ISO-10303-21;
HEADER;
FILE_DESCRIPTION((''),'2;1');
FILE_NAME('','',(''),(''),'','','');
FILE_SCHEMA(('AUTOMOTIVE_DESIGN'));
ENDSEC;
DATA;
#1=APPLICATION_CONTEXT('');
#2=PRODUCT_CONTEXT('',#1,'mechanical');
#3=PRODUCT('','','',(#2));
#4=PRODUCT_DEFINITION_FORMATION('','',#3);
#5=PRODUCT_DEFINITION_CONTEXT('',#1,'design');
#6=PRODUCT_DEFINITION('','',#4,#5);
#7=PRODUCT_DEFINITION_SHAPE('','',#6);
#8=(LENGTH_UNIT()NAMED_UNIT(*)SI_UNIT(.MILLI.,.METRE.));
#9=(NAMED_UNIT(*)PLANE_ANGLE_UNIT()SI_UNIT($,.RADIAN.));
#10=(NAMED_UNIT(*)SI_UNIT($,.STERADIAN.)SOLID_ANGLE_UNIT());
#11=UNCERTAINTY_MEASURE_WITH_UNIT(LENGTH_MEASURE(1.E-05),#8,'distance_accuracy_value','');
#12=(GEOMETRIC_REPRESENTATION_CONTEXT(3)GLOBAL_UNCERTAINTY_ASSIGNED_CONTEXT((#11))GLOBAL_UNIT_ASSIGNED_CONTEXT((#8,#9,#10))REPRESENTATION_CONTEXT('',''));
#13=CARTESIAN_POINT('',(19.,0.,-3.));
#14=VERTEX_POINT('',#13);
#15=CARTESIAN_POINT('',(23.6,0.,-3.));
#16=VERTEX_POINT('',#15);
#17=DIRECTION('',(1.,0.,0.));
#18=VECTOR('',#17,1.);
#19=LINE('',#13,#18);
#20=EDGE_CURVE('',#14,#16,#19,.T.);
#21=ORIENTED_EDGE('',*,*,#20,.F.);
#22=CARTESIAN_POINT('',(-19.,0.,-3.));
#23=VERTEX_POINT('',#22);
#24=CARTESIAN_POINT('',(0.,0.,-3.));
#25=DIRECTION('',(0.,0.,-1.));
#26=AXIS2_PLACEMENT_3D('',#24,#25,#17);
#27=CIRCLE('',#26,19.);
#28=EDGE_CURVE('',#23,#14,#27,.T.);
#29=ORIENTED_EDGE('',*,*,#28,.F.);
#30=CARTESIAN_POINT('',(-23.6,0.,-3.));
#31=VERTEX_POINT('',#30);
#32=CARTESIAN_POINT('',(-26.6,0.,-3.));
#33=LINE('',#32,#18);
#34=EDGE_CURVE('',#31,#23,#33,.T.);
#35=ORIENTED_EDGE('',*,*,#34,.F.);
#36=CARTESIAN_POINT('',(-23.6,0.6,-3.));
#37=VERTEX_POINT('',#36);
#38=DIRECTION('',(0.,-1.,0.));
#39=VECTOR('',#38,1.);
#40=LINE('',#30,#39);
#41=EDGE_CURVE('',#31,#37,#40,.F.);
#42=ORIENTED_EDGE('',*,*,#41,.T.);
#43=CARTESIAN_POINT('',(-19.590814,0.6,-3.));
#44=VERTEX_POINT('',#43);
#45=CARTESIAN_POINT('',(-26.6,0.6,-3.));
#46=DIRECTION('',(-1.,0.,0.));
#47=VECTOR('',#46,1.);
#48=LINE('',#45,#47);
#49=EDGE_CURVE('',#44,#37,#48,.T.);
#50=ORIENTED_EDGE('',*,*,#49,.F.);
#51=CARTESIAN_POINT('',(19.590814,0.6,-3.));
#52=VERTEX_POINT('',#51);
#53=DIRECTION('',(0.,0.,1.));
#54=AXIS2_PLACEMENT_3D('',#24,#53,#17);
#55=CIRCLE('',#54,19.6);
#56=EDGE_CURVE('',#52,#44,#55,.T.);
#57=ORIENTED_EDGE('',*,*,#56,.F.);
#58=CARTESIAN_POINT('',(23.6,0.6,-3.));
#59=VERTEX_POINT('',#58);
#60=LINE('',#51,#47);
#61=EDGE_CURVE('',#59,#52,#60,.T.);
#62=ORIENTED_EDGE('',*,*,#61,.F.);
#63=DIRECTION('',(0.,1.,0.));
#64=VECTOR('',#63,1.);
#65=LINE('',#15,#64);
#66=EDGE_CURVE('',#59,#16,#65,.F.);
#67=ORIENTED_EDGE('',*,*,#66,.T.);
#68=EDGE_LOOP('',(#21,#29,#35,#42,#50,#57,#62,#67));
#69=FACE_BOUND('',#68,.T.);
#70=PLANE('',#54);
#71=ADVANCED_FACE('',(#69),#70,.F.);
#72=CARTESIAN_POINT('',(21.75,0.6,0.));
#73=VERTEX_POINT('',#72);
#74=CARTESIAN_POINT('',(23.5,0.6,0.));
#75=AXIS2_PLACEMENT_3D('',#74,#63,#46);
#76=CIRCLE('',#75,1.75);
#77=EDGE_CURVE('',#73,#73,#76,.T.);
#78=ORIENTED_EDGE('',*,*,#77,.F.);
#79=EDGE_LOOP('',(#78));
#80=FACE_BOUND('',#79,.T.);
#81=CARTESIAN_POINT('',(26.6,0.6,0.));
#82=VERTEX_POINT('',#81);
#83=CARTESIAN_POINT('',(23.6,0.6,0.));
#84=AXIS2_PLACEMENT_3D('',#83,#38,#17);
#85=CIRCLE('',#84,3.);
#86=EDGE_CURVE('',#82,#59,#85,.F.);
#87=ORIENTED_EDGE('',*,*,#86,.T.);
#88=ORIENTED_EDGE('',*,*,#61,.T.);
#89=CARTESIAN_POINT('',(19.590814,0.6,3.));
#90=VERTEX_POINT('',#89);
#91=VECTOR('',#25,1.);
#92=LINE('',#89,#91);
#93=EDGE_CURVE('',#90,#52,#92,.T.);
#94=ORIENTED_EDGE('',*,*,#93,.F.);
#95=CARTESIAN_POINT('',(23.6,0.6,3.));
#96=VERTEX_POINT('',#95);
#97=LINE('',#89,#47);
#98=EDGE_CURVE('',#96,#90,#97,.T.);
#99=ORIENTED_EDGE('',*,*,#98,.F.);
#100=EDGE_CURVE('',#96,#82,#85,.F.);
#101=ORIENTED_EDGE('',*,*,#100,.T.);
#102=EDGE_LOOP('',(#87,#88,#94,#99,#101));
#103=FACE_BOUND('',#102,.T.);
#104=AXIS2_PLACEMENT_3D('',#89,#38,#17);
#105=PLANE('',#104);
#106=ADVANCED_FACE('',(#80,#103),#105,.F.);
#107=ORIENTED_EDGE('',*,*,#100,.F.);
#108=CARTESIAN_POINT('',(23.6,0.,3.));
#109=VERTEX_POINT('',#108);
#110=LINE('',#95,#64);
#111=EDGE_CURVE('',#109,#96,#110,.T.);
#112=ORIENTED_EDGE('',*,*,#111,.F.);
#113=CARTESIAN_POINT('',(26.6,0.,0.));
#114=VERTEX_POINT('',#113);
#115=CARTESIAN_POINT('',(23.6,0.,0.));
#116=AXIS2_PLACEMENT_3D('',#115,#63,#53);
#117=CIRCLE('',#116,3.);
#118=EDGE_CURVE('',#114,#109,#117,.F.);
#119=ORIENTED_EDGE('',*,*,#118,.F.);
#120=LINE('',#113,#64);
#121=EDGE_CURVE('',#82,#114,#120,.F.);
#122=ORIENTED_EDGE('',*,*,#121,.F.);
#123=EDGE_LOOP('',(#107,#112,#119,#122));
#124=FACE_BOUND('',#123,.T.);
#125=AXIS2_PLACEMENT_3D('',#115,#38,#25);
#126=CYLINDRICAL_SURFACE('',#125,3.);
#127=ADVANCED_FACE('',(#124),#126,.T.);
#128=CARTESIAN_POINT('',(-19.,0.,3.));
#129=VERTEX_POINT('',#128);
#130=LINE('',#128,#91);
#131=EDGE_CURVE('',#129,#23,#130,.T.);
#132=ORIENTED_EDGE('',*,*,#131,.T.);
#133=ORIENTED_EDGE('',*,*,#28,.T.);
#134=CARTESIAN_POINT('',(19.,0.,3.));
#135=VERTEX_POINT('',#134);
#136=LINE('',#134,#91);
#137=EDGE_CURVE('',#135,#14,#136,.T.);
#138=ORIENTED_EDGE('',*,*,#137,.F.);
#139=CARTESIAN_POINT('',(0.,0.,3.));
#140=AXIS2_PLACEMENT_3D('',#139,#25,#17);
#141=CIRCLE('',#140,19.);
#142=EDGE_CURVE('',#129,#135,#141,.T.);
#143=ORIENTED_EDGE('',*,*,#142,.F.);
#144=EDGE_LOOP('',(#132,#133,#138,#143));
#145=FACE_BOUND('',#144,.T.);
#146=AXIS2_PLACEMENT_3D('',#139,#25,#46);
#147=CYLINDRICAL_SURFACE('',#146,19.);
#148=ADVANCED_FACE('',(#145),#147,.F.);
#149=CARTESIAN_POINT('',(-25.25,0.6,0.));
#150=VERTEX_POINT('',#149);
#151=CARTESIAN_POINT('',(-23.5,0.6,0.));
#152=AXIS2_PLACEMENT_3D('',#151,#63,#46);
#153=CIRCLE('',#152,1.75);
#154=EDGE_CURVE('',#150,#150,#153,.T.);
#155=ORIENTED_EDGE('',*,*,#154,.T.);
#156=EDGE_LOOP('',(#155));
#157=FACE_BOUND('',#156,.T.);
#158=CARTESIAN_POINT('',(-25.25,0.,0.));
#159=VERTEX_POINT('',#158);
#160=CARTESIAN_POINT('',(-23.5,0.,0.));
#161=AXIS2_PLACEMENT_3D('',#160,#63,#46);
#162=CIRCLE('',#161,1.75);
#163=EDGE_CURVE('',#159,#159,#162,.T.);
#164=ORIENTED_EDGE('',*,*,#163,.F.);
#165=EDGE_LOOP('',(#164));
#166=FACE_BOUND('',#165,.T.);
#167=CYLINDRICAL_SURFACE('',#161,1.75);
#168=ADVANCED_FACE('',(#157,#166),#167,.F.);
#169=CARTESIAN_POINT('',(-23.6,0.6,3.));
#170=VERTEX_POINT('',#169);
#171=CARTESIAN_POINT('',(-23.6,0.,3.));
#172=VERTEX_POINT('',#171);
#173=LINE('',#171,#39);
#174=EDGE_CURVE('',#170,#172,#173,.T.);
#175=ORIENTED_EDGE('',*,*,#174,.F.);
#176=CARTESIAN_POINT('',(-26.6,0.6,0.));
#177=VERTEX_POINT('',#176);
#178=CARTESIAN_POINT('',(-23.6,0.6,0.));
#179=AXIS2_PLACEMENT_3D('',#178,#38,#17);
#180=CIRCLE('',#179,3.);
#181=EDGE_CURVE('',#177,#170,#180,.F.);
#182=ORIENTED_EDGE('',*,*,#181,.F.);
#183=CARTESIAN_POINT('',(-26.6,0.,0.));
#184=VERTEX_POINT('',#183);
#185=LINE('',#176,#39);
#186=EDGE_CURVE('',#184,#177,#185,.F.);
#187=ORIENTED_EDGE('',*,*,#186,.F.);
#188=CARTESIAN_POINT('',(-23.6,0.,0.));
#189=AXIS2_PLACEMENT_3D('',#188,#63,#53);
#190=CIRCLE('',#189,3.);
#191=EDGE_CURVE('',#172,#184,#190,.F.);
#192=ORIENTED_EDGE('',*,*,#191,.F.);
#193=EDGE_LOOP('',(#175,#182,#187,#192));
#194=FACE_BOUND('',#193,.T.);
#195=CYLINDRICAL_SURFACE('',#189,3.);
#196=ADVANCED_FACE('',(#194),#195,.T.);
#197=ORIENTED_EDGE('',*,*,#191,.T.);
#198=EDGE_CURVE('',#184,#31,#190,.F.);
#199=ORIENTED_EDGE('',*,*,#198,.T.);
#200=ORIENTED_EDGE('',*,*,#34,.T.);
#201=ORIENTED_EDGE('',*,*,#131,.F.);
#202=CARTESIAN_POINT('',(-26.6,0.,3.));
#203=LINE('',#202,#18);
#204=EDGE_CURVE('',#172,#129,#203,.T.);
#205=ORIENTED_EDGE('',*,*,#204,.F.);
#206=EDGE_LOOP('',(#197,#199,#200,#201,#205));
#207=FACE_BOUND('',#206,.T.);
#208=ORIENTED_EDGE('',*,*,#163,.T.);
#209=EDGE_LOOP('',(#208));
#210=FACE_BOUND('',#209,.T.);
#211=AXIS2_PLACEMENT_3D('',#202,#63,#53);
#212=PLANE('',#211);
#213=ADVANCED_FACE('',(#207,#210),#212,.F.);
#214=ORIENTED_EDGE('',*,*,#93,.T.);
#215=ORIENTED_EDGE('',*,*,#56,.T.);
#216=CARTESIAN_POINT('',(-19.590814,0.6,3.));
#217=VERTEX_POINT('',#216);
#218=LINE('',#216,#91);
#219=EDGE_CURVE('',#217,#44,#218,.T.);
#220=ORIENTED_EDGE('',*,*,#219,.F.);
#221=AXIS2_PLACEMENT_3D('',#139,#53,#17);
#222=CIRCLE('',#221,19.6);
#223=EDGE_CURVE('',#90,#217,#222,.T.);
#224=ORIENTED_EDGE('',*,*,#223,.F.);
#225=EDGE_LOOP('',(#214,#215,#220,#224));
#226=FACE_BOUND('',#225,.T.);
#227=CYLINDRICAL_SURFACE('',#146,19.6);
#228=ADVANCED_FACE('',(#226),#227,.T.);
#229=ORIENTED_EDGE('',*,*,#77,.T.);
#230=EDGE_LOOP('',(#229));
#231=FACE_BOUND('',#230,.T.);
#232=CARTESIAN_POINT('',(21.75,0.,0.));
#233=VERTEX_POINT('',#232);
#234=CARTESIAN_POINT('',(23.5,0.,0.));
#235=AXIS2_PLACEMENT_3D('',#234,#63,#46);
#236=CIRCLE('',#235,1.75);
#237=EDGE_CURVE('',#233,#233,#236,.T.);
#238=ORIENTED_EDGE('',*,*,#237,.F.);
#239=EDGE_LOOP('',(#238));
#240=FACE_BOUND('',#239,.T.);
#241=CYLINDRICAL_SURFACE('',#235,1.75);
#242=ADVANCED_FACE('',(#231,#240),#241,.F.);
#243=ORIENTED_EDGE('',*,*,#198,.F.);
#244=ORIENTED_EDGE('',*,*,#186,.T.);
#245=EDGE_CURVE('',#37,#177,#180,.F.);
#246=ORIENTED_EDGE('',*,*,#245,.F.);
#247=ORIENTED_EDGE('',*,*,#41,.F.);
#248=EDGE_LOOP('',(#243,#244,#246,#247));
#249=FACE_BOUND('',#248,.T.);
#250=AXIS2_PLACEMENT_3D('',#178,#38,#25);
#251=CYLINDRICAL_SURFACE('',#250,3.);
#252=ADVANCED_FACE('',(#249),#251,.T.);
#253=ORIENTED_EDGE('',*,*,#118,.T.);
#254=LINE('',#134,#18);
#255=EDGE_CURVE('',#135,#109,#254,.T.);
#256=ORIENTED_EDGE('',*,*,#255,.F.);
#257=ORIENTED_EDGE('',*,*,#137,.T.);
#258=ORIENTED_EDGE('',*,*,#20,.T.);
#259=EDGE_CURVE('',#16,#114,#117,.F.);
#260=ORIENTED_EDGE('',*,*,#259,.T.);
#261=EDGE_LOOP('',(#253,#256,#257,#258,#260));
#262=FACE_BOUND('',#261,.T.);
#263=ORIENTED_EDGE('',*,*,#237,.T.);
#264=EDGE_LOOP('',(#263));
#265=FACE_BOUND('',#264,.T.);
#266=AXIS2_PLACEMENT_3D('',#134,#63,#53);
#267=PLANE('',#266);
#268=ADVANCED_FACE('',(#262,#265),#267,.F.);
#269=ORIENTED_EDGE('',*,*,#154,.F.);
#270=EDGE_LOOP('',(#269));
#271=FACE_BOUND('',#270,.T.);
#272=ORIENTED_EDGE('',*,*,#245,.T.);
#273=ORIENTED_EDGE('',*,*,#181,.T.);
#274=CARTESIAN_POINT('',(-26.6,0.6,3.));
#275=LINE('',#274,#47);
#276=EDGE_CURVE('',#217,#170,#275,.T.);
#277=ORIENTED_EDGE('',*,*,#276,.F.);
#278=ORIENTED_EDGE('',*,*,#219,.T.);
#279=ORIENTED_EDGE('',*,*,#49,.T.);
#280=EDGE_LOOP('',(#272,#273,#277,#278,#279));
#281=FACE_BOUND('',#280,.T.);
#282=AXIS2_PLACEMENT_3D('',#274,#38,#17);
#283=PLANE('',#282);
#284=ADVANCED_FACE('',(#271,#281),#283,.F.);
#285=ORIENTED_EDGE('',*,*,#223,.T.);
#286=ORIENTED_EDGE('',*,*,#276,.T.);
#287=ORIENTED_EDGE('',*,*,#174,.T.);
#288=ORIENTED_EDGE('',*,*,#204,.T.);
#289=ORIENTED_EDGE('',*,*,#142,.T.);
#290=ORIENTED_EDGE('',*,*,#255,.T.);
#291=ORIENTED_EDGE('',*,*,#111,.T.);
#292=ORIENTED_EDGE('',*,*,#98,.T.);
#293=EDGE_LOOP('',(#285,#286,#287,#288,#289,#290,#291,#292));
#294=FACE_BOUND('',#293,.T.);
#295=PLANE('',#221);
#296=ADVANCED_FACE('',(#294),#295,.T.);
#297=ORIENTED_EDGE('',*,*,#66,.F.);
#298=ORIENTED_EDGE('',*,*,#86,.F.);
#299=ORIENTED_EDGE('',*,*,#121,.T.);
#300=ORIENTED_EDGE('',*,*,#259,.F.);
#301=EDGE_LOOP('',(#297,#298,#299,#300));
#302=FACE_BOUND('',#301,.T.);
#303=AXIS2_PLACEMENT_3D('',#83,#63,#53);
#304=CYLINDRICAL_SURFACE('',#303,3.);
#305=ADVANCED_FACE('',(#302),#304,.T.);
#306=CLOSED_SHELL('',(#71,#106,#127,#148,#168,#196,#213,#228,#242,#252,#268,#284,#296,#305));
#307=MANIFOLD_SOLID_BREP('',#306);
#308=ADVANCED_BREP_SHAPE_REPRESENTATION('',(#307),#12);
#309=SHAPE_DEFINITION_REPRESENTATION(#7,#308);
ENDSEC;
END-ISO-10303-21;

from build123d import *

# Parameters (mm, degrees)
BOSS_EXTRU_1_DEPTH      = 3
CONG_1_R                = 3
ESQUISSE2_R             = 1.75
ENL_V_MAT_EXTRU_1_DEPTH = 33.826209041


with BuildPart() as part:
    # Esquisse1 → Boss.-Extru.1 (new, symmetric)
    with BuildSketch(Plane.XY):
        with BuildLine():
            Line((-26.6, 0), (-19, 0))
            ThreePointArc((-19, 0), (0, 19), (19, 0))
            Line((19, 0), (26.6, 0))
            Line((26.6, 0), (26.6, 0.6))
            Line((26.6, 0.6), (19.590814174, 0.6))
            ThreePointArc((19.590814174, 0.6), (0, 19.6), (-19.590814174, 0.6))
            Line((-19.590814174, 0.6), (-26.6, 0.6))
            Line((-26.6, 0.6), (-26.6, 0))
        make_face()
    extrude(amount=BOSS_EXTRU_1_DEPTH, both=True)

    # Congé1
    cong_1_edges = [part.edges().sort_by_distance(p)[0] for p in [
        (-26.6, 0.3, -3),
        (-26.6, 0.3, 3),
        (26.6, 0.3, -3),
        (26.6, 0.3, 3),
    ]]
    fillet(cong_1_edges, radius=CONG_1_R - 0.0001)  # a hair under: the kernel refuses the full size

    # Esquisse2 → Enlèv. mat.-Extru.1 (cut, through all)
    with BuildSketch(Plane(origin=(0, 0.6, 0), x_dir=(1, 0, 0), z_dir=(0, 1, 0))):
        with Locations(Location((-23.5, 0, 0), (0, 0, 180))):
            Circle(ESQUISSE2_R)
        with Locations(Location((23.5, 0, 0), (0, 0, 180))):
            Circle(ESQUISSE2_R)
    extrude(amount=-ENL_V_MAT_EXTRU_1_DEPTH, mode=Mode.SUBTRACT)


solid = part.part
